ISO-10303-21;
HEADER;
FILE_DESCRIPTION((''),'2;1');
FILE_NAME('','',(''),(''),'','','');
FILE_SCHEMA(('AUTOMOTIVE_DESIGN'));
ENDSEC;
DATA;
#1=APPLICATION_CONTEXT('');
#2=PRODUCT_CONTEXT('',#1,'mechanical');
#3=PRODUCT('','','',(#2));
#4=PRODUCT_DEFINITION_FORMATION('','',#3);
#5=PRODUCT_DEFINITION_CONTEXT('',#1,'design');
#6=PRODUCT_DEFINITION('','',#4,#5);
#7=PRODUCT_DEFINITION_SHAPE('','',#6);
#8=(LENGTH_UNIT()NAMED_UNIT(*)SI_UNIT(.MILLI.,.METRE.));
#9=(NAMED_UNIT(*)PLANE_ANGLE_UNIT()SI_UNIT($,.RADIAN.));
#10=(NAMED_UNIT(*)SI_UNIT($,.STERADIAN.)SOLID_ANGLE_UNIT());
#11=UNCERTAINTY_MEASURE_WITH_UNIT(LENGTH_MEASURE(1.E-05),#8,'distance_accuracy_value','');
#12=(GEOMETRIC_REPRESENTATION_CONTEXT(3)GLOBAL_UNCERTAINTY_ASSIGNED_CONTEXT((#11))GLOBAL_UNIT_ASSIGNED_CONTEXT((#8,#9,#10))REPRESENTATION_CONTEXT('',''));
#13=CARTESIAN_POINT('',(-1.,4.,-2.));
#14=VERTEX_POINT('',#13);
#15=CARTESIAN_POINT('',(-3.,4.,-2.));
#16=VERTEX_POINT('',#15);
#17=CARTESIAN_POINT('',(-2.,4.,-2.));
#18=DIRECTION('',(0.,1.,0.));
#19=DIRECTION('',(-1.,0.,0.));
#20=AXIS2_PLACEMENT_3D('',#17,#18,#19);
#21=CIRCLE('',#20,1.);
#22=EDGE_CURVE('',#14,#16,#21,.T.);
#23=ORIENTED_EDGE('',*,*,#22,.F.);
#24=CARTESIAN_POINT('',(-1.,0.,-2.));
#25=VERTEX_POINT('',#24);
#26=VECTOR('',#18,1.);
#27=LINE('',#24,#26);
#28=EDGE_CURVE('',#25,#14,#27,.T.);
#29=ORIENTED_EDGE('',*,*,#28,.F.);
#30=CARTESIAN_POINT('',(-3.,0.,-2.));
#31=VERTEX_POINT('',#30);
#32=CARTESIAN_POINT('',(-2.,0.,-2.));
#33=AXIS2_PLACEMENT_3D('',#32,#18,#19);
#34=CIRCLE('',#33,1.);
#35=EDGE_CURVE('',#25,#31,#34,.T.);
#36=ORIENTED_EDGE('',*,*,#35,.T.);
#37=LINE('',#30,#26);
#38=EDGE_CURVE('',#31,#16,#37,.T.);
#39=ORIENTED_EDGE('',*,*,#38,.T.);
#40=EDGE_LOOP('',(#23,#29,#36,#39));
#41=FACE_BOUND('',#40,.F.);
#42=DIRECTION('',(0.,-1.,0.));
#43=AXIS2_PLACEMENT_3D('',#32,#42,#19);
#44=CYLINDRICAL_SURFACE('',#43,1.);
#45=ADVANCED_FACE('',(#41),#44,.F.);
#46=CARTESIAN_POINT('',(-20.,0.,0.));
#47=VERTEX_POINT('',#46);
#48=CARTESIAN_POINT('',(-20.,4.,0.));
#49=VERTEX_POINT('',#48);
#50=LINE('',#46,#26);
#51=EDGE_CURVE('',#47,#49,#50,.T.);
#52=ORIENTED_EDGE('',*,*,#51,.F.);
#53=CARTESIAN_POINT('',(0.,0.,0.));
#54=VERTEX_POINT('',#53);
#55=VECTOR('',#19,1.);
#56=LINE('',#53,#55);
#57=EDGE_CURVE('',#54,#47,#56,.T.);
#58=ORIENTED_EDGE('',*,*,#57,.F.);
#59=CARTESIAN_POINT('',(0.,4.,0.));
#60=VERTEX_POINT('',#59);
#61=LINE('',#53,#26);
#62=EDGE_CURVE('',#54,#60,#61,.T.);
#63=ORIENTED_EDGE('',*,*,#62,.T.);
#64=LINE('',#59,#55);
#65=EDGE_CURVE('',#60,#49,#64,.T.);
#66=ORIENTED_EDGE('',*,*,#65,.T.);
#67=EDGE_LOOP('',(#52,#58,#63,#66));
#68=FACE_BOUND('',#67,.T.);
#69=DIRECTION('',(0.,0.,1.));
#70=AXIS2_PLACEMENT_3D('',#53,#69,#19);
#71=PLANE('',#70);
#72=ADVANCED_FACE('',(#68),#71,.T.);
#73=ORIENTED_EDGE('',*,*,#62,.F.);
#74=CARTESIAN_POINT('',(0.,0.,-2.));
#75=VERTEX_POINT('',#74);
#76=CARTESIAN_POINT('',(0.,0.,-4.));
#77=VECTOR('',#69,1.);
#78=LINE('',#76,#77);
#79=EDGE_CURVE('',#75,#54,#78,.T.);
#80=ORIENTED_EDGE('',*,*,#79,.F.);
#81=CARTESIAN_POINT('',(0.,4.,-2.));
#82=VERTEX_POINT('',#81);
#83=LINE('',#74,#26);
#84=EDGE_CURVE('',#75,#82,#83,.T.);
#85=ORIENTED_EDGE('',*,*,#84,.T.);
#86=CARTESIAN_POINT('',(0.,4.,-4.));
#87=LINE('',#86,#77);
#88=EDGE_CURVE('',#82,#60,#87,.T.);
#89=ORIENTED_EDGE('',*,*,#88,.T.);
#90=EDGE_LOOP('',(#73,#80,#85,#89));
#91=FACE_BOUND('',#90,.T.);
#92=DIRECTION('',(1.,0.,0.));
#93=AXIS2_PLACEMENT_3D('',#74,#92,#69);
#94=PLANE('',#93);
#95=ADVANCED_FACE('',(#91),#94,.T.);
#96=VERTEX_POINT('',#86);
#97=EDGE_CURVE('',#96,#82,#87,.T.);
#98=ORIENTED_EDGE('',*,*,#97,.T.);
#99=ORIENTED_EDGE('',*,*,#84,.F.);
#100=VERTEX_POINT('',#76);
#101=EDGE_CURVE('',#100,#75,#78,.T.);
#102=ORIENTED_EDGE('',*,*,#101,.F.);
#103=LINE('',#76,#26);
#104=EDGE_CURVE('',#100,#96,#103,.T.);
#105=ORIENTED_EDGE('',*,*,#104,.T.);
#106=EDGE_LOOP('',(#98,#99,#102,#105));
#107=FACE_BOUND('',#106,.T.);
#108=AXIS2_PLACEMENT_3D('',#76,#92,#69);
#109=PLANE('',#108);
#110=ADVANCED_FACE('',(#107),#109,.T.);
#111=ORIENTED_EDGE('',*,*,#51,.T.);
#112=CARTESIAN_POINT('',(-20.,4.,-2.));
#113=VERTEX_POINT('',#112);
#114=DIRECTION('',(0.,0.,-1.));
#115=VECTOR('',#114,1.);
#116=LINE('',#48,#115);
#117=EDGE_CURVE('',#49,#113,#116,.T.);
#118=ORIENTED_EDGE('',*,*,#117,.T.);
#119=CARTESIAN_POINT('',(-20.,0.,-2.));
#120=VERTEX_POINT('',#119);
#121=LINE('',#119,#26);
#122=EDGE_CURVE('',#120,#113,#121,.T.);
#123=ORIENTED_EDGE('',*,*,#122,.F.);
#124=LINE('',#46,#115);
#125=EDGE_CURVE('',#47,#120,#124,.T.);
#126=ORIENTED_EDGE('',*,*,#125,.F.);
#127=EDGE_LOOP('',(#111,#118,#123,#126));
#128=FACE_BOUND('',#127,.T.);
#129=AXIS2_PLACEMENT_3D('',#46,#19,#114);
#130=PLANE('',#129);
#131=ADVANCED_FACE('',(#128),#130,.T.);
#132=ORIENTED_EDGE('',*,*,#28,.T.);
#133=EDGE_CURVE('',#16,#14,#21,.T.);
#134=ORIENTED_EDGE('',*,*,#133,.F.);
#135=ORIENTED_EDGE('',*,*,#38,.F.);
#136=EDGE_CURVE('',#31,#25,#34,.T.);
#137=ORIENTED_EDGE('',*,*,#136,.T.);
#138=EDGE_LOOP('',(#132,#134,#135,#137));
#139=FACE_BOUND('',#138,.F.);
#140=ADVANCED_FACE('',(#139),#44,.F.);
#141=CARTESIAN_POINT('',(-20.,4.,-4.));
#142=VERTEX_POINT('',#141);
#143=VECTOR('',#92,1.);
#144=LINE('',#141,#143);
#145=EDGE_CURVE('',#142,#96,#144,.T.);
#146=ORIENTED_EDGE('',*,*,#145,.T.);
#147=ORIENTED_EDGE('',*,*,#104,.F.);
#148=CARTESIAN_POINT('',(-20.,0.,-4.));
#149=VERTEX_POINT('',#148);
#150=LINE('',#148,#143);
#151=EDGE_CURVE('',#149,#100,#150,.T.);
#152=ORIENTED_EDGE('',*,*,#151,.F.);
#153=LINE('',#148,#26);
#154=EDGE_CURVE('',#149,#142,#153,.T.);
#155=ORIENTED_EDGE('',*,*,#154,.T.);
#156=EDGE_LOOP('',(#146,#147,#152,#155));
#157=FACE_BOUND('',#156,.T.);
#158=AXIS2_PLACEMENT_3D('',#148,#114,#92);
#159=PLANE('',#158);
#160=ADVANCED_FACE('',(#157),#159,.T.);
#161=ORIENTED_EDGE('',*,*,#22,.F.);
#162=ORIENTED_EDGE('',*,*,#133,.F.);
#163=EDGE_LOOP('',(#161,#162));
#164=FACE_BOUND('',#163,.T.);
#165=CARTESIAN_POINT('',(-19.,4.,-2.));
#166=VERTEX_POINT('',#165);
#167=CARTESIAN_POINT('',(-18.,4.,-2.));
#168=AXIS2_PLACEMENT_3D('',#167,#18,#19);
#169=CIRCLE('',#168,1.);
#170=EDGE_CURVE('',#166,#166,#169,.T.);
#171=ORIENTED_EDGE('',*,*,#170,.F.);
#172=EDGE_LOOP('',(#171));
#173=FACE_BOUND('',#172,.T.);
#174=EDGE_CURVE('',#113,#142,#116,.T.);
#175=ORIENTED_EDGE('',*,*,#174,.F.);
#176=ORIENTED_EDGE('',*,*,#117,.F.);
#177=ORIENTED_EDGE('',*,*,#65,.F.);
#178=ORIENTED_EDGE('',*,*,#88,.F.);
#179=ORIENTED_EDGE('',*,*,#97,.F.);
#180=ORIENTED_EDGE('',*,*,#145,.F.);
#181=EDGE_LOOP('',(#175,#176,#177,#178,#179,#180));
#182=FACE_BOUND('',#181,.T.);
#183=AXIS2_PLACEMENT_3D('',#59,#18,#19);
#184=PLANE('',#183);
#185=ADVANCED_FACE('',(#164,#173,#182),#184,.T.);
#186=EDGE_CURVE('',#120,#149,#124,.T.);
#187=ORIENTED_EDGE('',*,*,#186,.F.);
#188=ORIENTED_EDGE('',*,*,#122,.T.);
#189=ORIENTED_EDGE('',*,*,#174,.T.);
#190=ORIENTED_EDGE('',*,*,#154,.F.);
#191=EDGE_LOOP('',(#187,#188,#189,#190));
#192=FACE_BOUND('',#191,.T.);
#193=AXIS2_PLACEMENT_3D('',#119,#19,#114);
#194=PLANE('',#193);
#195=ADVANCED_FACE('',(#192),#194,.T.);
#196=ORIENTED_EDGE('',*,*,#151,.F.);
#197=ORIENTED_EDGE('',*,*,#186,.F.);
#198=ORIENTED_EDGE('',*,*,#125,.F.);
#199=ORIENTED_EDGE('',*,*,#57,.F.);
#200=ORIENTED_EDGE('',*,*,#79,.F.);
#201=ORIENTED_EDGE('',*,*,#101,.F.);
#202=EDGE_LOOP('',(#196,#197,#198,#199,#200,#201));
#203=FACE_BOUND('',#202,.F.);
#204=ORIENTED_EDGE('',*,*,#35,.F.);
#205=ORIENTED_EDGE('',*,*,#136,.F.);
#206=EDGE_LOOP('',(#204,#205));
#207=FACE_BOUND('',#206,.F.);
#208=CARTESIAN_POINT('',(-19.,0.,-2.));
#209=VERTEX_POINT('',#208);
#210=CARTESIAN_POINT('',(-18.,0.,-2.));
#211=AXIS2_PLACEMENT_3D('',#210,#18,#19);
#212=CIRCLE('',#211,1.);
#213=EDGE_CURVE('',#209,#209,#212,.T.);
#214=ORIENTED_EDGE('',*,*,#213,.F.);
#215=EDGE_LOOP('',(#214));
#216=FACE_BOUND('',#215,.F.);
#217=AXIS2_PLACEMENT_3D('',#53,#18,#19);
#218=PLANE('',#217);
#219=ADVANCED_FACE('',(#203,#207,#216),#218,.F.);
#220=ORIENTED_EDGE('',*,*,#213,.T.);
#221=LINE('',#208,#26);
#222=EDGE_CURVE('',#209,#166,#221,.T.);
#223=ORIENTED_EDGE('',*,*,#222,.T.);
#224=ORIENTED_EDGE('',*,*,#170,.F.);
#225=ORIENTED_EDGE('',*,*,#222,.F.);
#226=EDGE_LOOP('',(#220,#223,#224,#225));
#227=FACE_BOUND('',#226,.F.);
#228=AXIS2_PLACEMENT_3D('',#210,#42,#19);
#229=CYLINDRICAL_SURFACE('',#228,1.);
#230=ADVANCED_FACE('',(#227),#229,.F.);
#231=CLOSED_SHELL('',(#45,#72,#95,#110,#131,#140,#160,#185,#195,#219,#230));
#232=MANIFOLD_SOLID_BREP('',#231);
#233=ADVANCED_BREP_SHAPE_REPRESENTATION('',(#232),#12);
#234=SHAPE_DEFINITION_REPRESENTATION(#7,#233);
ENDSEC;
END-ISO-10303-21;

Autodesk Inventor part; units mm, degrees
ref_plane "YZ Plane" through (0, 0, 0) normal (1, 0, 0) x (0, 1, 0)
ref_plane "XZ Plane" through (0, 0, 0) normal (0, 1, 0) x (-1, 0, 0)
ref_plane "XY Plane" through (0, 0, 0) normal (0, 0, 1) x (1, 0, 0)
sketch "Sketch1" plane through (0, 0, 0) normal (0, 1, 0) x (-1, 0, 0)
  line L0 (0, 0) -> (20, 0)
  line L1 (20, 0) -> (20, -4)
  line L2 (20, -4) -> (0, -4)
  line L3 (0, -4) -> (0, 0)
  line L4 (0, -2) -> (2, -2)
  line L5 (20, -2) -> (18, -2)
  circle A0 centre (18, -2) radius 1
  circle A1 centre (2, -2) radius 1
  dimension "d0" = 20
  dimension "d1" = 4
  dimension "d2" = 2
  dimension "d3" = 2
  dimension "d4" = 2
  dimension "d5" = 2
extrude "Extrusion1" add sketch "Sketch1" along normal blind 4
properties part number "parallel_bar_short_v1"
